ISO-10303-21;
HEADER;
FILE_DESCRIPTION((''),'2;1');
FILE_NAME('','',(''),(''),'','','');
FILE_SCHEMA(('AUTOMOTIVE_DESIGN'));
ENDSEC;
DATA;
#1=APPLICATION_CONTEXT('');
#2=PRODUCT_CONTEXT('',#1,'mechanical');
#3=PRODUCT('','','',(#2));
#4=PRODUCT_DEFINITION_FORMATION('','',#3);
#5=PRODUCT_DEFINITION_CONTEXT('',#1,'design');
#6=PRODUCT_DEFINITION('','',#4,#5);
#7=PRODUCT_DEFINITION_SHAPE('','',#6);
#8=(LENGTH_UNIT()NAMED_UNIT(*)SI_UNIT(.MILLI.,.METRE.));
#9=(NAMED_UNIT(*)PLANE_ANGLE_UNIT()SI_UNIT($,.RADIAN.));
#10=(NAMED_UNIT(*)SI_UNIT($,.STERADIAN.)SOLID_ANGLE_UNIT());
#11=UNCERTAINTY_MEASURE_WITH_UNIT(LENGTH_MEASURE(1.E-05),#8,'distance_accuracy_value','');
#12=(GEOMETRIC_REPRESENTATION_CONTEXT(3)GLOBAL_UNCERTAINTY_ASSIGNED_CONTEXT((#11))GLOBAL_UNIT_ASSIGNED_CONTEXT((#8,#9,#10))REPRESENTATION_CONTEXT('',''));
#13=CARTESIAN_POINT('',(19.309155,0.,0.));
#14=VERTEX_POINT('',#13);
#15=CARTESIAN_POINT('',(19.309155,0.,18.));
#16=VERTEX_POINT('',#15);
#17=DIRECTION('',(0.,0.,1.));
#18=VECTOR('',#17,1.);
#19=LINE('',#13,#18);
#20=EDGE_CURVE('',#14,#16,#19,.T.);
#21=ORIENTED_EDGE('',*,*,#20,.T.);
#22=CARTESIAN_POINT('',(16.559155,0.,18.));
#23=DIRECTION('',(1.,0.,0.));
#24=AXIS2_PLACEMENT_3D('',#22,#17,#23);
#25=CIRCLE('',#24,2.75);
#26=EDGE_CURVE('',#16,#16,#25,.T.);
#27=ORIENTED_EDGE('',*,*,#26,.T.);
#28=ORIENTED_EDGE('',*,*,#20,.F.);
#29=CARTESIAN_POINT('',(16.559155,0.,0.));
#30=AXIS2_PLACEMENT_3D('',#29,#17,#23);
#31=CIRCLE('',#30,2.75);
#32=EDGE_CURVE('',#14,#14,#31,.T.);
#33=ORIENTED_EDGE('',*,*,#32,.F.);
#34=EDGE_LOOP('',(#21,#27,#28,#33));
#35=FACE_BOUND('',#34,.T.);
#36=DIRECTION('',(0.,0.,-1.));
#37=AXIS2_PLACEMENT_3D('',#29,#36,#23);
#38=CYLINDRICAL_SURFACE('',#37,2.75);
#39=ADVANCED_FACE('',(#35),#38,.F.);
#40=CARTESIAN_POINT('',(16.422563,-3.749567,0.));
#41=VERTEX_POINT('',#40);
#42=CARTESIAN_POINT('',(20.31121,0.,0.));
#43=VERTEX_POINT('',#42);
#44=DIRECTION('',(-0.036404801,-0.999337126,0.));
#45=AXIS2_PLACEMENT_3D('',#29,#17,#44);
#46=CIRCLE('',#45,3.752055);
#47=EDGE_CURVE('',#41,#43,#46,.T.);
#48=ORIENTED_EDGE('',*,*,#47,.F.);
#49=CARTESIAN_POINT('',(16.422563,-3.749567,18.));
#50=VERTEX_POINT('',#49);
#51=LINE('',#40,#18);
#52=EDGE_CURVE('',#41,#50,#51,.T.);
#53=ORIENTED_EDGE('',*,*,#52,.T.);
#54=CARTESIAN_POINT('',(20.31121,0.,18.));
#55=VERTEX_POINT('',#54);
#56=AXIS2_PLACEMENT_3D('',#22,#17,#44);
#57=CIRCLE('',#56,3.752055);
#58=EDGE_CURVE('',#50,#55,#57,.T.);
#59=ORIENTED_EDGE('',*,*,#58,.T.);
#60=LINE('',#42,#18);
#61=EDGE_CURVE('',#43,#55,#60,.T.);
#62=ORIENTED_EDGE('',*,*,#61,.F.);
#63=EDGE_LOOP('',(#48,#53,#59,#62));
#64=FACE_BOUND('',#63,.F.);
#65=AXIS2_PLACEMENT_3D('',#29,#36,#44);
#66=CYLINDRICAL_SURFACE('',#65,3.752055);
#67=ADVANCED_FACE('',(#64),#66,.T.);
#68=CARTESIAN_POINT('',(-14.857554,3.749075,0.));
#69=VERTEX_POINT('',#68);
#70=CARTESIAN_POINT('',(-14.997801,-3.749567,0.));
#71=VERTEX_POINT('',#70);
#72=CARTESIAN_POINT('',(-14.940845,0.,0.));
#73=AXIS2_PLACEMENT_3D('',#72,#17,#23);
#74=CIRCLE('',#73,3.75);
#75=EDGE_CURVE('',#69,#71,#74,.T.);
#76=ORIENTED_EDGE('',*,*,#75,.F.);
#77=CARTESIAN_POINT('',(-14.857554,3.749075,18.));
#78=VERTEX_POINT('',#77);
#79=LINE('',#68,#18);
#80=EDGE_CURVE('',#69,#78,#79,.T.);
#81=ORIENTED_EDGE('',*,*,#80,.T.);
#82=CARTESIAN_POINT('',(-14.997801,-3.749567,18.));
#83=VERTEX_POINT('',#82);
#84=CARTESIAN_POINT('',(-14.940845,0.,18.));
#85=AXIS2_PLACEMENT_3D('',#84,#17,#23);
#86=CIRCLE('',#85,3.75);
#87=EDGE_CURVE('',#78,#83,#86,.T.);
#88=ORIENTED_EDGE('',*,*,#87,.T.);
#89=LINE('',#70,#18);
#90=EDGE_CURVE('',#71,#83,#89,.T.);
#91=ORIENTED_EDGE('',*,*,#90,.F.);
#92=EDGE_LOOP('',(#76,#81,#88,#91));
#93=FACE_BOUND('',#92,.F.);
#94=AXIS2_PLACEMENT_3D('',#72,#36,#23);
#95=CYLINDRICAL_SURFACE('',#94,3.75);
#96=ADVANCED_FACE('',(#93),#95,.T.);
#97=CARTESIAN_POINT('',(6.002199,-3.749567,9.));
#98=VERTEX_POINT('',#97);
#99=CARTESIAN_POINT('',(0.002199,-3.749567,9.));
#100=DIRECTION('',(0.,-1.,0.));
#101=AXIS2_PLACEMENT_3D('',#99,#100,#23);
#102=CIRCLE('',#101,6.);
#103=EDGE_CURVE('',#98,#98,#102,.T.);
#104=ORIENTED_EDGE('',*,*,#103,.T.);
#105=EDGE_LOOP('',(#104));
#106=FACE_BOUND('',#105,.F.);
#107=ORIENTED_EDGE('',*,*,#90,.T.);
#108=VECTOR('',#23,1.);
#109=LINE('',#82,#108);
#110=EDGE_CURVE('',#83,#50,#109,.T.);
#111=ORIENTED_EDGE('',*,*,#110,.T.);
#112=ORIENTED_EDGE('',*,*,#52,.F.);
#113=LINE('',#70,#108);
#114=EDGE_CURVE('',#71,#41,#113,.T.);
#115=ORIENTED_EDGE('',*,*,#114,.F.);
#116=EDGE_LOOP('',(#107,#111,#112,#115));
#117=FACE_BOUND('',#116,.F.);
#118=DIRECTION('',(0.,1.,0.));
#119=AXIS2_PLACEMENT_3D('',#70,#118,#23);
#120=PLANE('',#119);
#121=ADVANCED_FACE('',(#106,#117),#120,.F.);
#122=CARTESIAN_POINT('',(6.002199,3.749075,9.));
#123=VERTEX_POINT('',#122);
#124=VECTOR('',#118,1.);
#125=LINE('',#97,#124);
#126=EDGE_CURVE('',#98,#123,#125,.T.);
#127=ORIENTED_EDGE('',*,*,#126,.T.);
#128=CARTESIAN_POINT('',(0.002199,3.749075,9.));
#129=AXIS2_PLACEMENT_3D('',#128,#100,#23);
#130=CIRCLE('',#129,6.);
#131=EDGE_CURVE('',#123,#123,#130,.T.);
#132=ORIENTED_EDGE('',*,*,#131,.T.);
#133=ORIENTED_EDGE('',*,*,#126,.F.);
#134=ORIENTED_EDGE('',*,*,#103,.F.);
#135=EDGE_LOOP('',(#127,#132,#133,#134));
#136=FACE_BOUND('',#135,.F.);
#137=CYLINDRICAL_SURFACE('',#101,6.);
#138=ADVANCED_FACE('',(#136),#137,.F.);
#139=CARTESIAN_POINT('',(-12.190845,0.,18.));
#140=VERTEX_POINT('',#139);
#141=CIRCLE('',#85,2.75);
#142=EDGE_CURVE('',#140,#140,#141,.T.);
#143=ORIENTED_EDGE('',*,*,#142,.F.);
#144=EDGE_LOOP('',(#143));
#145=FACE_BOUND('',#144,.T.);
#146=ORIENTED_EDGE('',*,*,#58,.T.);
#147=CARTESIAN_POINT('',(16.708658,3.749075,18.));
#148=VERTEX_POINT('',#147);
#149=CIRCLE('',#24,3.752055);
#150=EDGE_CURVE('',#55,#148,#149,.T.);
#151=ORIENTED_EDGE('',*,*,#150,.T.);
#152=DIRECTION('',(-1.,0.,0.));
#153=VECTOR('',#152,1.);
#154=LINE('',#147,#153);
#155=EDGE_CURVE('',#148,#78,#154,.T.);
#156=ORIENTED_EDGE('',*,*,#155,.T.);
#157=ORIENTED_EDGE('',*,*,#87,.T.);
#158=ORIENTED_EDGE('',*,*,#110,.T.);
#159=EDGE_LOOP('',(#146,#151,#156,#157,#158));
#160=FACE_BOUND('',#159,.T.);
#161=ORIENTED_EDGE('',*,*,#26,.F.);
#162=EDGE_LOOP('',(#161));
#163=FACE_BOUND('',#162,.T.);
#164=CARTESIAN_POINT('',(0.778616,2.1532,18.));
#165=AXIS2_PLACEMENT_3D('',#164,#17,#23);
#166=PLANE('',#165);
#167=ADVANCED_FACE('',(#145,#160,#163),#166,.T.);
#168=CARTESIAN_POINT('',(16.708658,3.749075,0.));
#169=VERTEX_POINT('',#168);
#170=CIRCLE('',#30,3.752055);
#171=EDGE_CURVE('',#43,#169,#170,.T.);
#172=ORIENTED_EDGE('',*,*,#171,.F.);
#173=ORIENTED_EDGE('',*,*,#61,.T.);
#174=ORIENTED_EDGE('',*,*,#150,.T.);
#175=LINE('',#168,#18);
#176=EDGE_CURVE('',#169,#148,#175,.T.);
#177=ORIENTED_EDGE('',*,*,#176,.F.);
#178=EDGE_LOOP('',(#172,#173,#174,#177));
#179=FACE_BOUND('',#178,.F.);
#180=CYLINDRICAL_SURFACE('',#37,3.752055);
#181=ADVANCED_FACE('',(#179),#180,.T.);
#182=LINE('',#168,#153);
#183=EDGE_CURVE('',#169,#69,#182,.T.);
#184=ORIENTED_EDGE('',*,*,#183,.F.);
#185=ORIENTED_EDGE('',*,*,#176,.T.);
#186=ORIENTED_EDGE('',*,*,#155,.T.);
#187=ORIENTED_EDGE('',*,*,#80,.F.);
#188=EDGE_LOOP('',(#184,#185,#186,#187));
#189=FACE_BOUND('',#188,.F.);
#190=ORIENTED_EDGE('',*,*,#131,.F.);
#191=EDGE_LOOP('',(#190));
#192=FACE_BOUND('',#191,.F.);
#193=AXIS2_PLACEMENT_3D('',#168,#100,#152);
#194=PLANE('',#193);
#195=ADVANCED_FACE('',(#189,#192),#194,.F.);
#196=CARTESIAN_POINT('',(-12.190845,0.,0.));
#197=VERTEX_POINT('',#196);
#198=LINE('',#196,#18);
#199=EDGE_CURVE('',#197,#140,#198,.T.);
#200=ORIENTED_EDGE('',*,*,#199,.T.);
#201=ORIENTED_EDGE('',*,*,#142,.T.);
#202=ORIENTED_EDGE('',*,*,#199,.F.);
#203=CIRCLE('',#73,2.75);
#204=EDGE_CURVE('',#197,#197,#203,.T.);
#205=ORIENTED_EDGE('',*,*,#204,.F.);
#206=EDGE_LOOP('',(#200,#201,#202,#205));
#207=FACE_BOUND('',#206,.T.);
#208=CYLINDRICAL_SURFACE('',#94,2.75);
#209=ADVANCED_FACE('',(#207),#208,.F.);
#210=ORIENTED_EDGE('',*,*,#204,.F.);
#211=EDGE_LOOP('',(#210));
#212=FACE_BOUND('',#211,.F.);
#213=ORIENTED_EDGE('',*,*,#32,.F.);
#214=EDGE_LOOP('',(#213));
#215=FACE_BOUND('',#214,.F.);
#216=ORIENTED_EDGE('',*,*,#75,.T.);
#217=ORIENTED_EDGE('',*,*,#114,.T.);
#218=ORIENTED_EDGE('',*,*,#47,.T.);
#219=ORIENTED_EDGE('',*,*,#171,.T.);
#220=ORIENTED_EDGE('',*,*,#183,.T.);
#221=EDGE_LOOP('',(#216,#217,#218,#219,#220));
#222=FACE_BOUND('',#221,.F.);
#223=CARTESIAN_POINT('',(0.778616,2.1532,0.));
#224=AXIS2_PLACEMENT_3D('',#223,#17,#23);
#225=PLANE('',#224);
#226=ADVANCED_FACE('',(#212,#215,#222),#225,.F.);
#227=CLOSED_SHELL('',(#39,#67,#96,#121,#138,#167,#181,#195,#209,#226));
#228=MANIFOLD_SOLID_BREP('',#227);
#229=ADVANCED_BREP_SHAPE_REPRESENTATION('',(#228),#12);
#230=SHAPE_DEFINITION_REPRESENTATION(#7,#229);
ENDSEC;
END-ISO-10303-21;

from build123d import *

# Parameters (mm, degrees)
F0_R     = 2.75
F1_DEPTH = 18
F2_R     = 6
F3_DEPTH = 7.5005674408


# Not quite as in the source:
# - a feature names something its author has since deleted; it is built from what else it names


with BuildPart() as f1:
    # F0 (on Top) → F1 (new body)
    with BuildSketch(Plane.XY):
        with BuildLine():
            ThreePointArc((-14.8575540239, 3.74907491), (-12.2599082251, 2.6220374098), (-11.1908445954, 0))
            Line((-11.1908445954, 0), (12.8071008226, 0))
            ThreePointArc((12.8071008226, 0), (13.8537114507, 2.599708945), (16.4096532115, 3.74907491))
            Line((16.4096532115, 3.74907491), (-14.8575540239, 3.74907491))
        make_face()
        with BuildLine():
            ThreePointArc((-14.8838884093, -3.7495674408), (-12.269133, -2.6314363285), (-11.1908445954, 0))
            ThreePointArc((-11.1908445954, 0), (-12.2599082251, 2.6220374098), (-14.8575540239, 3.74907491))
            ThreePointArc((-14.8575540239, 3.74907491), (-18.6901888916, 0.0701238113), (-14.9978007816, -3.7495674408))
            Line((-14.9978007816, -3.7495674408), (-14.8838884093, -3.7495674408))
        make_face()
        with Locations((-14.9408445954, 0)):
            Circle(F0_R, mode=Mode.SUBTRACT)
        with BuildLine():
            ThreePointArc((16.4096532115, 3.74907491), (13.8537114507, 2.599708945), (12.8071008226, 0))
            ThreePointArc((12.8071008226, 0), (13.858191018, -2.60436268), (16.4225626025, -3.7495674408))
            ThreePointArc((16.4225626025, -3.7495674408), (19.1635180845, -2.7009643866), (20.3112099866, 0))
            ThreePointArc((20.3112099866, 0), (19.2645993584, 2.599708945), (16.7086575976, 3.74907491))
            Line((16.7086575976, 3.74907491), (16.4096532115, 3.74907491))
        make_face()
        with Locations((16.5591554046, 0)):
            Circle(F0_R, mode=Mode.SUBTRACT)
        with BuildLine():
            Line((12.8071008226, 0), (-11.1908445954, 0))
            ThreePointArc((-11.1908445954, 0), (-12.269133, -2.6314363285), (-14.8838884093, -3.7495674408))
            Line((-14.8838884093, -3.7495674408), (16.4225626025, -3.7495674408))
            ThreePointArc((16.4225626025, -3.7495674408), (13.858191018, -2.60436268), (12.8071008226, 0))
        make_face()
    extrude(amount=F1_DEPTH)

    # F2 (on face) → F3 (cut, through all)
    with BuildSketch(Plane.XZ.offset(3.7495674408)):
        with Locations((0.0021992184, 9)):
            Circle(F2_R)
    extrude(amount=-F3_DEPTH, mode=Mode.SUBTRACT)


solid = f1.part
